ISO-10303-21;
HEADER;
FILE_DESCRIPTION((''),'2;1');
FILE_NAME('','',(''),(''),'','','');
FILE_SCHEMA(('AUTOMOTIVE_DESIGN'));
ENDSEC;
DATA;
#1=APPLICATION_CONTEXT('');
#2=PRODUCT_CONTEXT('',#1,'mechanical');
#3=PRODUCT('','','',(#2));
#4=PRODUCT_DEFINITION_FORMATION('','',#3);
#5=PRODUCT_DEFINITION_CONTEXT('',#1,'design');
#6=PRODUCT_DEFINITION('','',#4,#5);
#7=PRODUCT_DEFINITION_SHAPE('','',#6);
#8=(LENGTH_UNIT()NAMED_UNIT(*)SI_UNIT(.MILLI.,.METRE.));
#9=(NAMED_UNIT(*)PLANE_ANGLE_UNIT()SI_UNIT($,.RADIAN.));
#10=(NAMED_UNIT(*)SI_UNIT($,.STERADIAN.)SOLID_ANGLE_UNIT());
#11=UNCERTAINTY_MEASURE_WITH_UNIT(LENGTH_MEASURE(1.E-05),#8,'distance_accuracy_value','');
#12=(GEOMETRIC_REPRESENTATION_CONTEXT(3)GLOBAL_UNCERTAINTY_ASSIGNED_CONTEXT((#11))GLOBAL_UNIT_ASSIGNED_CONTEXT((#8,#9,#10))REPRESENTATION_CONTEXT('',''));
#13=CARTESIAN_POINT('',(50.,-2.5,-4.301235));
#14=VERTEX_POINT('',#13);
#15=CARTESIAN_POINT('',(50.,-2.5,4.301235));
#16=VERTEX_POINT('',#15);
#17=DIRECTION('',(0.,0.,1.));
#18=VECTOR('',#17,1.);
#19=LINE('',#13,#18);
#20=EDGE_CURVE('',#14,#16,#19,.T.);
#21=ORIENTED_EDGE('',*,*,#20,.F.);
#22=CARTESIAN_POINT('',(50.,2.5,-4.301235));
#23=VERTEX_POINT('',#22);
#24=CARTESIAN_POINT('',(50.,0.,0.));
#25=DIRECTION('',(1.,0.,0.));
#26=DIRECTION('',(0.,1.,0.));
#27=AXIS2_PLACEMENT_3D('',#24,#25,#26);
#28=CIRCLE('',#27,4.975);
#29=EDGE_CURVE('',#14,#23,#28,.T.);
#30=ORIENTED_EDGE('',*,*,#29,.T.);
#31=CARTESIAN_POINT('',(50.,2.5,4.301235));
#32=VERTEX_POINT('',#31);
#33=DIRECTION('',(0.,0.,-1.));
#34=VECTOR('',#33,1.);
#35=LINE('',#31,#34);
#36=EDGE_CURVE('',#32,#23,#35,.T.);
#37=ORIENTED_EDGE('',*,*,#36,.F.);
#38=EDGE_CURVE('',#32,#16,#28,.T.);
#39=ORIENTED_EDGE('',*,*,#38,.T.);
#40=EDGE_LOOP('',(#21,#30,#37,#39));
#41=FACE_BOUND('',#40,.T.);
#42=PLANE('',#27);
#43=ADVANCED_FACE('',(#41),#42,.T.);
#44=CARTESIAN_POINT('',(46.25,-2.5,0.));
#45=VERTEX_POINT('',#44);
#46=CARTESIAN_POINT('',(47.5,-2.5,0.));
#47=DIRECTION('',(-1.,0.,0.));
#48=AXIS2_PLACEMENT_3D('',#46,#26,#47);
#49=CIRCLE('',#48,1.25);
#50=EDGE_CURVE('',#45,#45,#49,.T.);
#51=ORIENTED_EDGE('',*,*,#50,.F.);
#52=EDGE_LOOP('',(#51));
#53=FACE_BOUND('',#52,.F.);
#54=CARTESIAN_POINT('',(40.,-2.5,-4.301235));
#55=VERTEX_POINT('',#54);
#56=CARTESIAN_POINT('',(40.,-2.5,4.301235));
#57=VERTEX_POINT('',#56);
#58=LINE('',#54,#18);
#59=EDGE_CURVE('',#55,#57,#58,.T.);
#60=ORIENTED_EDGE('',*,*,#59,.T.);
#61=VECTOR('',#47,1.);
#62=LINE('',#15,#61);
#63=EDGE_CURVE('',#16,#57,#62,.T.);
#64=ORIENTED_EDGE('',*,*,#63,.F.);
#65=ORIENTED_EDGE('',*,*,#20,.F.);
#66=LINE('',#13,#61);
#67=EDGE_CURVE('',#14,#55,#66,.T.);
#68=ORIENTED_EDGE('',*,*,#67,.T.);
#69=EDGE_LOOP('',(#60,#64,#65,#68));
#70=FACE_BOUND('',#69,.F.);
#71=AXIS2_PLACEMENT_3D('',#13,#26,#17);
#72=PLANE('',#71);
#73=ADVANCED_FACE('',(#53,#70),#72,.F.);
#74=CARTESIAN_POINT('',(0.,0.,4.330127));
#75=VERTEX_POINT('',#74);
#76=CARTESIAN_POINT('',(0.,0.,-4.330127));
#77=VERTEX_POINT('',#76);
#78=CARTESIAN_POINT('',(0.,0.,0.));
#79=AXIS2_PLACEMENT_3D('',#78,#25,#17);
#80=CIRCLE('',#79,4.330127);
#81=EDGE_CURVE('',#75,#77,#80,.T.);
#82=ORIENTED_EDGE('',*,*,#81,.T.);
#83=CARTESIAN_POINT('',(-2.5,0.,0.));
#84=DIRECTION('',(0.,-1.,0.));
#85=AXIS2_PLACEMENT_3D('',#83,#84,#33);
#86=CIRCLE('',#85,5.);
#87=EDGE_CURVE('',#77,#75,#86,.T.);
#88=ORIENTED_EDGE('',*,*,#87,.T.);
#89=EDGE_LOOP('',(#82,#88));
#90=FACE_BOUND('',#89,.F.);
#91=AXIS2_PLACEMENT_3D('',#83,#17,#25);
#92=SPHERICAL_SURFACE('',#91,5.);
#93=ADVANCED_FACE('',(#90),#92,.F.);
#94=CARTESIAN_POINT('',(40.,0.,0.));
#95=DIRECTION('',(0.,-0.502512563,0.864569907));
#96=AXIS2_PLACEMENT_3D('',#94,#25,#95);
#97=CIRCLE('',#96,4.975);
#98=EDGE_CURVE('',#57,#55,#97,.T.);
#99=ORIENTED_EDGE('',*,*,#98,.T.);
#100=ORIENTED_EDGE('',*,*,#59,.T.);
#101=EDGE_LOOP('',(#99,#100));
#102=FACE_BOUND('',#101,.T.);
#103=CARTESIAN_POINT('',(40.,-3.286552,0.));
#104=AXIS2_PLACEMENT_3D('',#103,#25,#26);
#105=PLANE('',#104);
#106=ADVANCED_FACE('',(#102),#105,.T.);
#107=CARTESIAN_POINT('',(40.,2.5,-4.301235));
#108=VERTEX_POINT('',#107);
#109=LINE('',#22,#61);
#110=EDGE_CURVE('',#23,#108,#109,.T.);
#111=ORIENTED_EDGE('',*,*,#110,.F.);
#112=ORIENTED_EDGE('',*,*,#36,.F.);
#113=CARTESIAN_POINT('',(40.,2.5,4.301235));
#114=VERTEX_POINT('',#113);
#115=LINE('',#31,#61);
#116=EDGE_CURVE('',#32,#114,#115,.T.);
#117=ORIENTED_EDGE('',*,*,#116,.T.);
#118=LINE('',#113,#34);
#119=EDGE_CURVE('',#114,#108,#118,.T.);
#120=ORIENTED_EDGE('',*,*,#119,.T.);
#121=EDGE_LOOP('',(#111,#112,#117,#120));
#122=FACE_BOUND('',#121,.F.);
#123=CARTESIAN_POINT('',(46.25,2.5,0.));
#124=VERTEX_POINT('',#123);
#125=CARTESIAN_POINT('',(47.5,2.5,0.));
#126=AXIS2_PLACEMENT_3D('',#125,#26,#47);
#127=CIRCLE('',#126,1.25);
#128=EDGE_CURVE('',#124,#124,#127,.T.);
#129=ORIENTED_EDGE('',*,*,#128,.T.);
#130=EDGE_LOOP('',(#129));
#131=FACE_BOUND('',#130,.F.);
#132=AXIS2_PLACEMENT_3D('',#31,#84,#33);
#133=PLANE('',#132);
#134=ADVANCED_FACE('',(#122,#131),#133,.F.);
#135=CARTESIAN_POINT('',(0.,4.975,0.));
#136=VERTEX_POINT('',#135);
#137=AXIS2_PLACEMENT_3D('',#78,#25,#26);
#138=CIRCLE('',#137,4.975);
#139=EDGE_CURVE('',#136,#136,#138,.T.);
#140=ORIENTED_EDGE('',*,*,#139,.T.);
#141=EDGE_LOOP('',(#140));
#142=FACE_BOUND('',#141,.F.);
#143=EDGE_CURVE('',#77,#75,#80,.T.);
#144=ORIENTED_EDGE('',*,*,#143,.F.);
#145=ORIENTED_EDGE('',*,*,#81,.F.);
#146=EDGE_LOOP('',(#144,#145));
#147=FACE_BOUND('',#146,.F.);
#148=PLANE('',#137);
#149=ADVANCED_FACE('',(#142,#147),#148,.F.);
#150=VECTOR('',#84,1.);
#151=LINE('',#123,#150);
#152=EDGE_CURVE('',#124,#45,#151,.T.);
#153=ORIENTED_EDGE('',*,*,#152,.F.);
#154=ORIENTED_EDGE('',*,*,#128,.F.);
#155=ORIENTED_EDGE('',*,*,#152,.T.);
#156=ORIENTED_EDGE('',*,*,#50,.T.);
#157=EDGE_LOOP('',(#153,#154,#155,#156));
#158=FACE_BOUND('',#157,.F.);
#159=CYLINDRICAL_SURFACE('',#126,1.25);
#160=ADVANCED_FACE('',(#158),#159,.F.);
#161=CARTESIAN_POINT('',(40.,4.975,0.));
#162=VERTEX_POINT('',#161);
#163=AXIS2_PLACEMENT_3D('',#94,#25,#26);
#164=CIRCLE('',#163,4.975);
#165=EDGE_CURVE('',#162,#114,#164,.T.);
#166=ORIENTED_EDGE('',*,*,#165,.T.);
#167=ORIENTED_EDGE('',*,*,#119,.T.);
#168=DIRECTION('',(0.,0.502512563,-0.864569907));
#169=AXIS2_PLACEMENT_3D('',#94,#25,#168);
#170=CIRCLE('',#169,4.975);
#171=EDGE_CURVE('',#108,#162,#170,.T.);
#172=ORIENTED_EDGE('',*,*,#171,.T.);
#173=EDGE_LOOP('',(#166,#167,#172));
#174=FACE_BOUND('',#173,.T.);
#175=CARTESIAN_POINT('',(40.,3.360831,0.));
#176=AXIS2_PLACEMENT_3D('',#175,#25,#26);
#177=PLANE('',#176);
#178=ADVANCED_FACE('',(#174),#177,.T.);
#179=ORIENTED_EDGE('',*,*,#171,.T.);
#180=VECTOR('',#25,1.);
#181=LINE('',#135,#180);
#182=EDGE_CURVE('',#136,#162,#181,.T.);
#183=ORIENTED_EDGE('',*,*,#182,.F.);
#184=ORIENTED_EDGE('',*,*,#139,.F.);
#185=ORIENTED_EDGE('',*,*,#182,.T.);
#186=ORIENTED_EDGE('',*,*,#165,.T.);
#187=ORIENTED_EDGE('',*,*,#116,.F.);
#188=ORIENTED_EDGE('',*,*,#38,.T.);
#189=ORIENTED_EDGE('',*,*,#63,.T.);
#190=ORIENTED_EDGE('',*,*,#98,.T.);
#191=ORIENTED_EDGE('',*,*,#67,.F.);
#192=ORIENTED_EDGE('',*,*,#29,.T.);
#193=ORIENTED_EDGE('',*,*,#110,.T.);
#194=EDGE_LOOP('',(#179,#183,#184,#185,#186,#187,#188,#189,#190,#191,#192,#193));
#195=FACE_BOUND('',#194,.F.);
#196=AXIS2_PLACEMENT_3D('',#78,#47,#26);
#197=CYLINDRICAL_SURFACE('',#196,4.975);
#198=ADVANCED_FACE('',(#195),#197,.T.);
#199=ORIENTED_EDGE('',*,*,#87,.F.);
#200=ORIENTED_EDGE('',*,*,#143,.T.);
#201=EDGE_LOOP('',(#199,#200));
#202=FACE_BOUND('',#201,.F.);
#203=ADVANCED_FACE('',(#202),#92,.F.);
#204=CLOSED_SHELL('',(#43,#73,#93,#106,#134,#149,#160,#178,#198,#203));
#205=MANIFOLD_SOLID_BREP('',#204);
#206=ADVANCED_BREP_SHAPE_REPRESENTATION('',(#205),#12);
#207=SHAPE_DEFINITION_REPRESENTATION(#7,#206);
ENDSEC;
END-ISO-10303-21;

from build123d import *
from build123d import SkipClean  # not in build123d's __all__

# Parameters (mm, degrees)
F0_R     = 4.975
F1_DEPTH = 50
F3_DEPTH = 10
F4_R     = 1.25
F5_DEPTH = 5


with BuildPart() as f1:
    # F0 (on Right) → F1 (new body)
    with BuildSketch(Plane.YZ):
        Circle(F0_R)
    extrude(amount=F1_DEPTH)

    # F2 (on face) → F3 (cut)
    with BuildSketch(Plane.YZ.offset(50)):
        with BuildLine():
            Line((2.5, 4.3012352877), (2.5, -4.3012352877))
            ThreePointArc((2.5, -4.3012352877), (4.3120833132, -2.4812421285), (4.975, 0))
            ThreePointArc((4.975, 0), (4.3120833132, 2.4812421285), (2.5, 4.3012352877))
        make_face()
        with BuildLine():
            ThreePointArc((-2.5, 4.3012352877), (-4.975, 0), (-2.5, -4.3012352877))
            Line((-2.5, -4.3012352877), (-2.5, 4.3012352877))
        make_face()
    extrude(amount=-F3_DEPTH, mode=Mode.SUBTRACT)

    # F4 (on face) → F5 (cut)
    with BuildSketch(Plane(origin=(0, 2.5, 0), x_dir=(-1, 0, 0), z_dir=(0, 1, 0))):
        with Locations((-47.5, 0)):
            Circle(F4_R)
    extrude(amount=-F5_DEPTH, mode=Mode.SUBTRACT)

    # F6 (on Front) → F7 (revolve, cut)
    with BuildSketch(Plane.XZ):
        with BuildLine():
            Line((-2.5, 5), (-2.5, -5))
            ThreePointArc((-2.5, -5), (2.5, 0), (-2.5, 5))
        make_face()
    with SkipClean():  # cleaning this boolean's faces spoils the solid; the shape is the same uncleaned
        revolve(axis=Axis((-2.5, 0, 0), (0, 0, 1)), mode=Mode.SUBTRACT)


solid = f1.part
